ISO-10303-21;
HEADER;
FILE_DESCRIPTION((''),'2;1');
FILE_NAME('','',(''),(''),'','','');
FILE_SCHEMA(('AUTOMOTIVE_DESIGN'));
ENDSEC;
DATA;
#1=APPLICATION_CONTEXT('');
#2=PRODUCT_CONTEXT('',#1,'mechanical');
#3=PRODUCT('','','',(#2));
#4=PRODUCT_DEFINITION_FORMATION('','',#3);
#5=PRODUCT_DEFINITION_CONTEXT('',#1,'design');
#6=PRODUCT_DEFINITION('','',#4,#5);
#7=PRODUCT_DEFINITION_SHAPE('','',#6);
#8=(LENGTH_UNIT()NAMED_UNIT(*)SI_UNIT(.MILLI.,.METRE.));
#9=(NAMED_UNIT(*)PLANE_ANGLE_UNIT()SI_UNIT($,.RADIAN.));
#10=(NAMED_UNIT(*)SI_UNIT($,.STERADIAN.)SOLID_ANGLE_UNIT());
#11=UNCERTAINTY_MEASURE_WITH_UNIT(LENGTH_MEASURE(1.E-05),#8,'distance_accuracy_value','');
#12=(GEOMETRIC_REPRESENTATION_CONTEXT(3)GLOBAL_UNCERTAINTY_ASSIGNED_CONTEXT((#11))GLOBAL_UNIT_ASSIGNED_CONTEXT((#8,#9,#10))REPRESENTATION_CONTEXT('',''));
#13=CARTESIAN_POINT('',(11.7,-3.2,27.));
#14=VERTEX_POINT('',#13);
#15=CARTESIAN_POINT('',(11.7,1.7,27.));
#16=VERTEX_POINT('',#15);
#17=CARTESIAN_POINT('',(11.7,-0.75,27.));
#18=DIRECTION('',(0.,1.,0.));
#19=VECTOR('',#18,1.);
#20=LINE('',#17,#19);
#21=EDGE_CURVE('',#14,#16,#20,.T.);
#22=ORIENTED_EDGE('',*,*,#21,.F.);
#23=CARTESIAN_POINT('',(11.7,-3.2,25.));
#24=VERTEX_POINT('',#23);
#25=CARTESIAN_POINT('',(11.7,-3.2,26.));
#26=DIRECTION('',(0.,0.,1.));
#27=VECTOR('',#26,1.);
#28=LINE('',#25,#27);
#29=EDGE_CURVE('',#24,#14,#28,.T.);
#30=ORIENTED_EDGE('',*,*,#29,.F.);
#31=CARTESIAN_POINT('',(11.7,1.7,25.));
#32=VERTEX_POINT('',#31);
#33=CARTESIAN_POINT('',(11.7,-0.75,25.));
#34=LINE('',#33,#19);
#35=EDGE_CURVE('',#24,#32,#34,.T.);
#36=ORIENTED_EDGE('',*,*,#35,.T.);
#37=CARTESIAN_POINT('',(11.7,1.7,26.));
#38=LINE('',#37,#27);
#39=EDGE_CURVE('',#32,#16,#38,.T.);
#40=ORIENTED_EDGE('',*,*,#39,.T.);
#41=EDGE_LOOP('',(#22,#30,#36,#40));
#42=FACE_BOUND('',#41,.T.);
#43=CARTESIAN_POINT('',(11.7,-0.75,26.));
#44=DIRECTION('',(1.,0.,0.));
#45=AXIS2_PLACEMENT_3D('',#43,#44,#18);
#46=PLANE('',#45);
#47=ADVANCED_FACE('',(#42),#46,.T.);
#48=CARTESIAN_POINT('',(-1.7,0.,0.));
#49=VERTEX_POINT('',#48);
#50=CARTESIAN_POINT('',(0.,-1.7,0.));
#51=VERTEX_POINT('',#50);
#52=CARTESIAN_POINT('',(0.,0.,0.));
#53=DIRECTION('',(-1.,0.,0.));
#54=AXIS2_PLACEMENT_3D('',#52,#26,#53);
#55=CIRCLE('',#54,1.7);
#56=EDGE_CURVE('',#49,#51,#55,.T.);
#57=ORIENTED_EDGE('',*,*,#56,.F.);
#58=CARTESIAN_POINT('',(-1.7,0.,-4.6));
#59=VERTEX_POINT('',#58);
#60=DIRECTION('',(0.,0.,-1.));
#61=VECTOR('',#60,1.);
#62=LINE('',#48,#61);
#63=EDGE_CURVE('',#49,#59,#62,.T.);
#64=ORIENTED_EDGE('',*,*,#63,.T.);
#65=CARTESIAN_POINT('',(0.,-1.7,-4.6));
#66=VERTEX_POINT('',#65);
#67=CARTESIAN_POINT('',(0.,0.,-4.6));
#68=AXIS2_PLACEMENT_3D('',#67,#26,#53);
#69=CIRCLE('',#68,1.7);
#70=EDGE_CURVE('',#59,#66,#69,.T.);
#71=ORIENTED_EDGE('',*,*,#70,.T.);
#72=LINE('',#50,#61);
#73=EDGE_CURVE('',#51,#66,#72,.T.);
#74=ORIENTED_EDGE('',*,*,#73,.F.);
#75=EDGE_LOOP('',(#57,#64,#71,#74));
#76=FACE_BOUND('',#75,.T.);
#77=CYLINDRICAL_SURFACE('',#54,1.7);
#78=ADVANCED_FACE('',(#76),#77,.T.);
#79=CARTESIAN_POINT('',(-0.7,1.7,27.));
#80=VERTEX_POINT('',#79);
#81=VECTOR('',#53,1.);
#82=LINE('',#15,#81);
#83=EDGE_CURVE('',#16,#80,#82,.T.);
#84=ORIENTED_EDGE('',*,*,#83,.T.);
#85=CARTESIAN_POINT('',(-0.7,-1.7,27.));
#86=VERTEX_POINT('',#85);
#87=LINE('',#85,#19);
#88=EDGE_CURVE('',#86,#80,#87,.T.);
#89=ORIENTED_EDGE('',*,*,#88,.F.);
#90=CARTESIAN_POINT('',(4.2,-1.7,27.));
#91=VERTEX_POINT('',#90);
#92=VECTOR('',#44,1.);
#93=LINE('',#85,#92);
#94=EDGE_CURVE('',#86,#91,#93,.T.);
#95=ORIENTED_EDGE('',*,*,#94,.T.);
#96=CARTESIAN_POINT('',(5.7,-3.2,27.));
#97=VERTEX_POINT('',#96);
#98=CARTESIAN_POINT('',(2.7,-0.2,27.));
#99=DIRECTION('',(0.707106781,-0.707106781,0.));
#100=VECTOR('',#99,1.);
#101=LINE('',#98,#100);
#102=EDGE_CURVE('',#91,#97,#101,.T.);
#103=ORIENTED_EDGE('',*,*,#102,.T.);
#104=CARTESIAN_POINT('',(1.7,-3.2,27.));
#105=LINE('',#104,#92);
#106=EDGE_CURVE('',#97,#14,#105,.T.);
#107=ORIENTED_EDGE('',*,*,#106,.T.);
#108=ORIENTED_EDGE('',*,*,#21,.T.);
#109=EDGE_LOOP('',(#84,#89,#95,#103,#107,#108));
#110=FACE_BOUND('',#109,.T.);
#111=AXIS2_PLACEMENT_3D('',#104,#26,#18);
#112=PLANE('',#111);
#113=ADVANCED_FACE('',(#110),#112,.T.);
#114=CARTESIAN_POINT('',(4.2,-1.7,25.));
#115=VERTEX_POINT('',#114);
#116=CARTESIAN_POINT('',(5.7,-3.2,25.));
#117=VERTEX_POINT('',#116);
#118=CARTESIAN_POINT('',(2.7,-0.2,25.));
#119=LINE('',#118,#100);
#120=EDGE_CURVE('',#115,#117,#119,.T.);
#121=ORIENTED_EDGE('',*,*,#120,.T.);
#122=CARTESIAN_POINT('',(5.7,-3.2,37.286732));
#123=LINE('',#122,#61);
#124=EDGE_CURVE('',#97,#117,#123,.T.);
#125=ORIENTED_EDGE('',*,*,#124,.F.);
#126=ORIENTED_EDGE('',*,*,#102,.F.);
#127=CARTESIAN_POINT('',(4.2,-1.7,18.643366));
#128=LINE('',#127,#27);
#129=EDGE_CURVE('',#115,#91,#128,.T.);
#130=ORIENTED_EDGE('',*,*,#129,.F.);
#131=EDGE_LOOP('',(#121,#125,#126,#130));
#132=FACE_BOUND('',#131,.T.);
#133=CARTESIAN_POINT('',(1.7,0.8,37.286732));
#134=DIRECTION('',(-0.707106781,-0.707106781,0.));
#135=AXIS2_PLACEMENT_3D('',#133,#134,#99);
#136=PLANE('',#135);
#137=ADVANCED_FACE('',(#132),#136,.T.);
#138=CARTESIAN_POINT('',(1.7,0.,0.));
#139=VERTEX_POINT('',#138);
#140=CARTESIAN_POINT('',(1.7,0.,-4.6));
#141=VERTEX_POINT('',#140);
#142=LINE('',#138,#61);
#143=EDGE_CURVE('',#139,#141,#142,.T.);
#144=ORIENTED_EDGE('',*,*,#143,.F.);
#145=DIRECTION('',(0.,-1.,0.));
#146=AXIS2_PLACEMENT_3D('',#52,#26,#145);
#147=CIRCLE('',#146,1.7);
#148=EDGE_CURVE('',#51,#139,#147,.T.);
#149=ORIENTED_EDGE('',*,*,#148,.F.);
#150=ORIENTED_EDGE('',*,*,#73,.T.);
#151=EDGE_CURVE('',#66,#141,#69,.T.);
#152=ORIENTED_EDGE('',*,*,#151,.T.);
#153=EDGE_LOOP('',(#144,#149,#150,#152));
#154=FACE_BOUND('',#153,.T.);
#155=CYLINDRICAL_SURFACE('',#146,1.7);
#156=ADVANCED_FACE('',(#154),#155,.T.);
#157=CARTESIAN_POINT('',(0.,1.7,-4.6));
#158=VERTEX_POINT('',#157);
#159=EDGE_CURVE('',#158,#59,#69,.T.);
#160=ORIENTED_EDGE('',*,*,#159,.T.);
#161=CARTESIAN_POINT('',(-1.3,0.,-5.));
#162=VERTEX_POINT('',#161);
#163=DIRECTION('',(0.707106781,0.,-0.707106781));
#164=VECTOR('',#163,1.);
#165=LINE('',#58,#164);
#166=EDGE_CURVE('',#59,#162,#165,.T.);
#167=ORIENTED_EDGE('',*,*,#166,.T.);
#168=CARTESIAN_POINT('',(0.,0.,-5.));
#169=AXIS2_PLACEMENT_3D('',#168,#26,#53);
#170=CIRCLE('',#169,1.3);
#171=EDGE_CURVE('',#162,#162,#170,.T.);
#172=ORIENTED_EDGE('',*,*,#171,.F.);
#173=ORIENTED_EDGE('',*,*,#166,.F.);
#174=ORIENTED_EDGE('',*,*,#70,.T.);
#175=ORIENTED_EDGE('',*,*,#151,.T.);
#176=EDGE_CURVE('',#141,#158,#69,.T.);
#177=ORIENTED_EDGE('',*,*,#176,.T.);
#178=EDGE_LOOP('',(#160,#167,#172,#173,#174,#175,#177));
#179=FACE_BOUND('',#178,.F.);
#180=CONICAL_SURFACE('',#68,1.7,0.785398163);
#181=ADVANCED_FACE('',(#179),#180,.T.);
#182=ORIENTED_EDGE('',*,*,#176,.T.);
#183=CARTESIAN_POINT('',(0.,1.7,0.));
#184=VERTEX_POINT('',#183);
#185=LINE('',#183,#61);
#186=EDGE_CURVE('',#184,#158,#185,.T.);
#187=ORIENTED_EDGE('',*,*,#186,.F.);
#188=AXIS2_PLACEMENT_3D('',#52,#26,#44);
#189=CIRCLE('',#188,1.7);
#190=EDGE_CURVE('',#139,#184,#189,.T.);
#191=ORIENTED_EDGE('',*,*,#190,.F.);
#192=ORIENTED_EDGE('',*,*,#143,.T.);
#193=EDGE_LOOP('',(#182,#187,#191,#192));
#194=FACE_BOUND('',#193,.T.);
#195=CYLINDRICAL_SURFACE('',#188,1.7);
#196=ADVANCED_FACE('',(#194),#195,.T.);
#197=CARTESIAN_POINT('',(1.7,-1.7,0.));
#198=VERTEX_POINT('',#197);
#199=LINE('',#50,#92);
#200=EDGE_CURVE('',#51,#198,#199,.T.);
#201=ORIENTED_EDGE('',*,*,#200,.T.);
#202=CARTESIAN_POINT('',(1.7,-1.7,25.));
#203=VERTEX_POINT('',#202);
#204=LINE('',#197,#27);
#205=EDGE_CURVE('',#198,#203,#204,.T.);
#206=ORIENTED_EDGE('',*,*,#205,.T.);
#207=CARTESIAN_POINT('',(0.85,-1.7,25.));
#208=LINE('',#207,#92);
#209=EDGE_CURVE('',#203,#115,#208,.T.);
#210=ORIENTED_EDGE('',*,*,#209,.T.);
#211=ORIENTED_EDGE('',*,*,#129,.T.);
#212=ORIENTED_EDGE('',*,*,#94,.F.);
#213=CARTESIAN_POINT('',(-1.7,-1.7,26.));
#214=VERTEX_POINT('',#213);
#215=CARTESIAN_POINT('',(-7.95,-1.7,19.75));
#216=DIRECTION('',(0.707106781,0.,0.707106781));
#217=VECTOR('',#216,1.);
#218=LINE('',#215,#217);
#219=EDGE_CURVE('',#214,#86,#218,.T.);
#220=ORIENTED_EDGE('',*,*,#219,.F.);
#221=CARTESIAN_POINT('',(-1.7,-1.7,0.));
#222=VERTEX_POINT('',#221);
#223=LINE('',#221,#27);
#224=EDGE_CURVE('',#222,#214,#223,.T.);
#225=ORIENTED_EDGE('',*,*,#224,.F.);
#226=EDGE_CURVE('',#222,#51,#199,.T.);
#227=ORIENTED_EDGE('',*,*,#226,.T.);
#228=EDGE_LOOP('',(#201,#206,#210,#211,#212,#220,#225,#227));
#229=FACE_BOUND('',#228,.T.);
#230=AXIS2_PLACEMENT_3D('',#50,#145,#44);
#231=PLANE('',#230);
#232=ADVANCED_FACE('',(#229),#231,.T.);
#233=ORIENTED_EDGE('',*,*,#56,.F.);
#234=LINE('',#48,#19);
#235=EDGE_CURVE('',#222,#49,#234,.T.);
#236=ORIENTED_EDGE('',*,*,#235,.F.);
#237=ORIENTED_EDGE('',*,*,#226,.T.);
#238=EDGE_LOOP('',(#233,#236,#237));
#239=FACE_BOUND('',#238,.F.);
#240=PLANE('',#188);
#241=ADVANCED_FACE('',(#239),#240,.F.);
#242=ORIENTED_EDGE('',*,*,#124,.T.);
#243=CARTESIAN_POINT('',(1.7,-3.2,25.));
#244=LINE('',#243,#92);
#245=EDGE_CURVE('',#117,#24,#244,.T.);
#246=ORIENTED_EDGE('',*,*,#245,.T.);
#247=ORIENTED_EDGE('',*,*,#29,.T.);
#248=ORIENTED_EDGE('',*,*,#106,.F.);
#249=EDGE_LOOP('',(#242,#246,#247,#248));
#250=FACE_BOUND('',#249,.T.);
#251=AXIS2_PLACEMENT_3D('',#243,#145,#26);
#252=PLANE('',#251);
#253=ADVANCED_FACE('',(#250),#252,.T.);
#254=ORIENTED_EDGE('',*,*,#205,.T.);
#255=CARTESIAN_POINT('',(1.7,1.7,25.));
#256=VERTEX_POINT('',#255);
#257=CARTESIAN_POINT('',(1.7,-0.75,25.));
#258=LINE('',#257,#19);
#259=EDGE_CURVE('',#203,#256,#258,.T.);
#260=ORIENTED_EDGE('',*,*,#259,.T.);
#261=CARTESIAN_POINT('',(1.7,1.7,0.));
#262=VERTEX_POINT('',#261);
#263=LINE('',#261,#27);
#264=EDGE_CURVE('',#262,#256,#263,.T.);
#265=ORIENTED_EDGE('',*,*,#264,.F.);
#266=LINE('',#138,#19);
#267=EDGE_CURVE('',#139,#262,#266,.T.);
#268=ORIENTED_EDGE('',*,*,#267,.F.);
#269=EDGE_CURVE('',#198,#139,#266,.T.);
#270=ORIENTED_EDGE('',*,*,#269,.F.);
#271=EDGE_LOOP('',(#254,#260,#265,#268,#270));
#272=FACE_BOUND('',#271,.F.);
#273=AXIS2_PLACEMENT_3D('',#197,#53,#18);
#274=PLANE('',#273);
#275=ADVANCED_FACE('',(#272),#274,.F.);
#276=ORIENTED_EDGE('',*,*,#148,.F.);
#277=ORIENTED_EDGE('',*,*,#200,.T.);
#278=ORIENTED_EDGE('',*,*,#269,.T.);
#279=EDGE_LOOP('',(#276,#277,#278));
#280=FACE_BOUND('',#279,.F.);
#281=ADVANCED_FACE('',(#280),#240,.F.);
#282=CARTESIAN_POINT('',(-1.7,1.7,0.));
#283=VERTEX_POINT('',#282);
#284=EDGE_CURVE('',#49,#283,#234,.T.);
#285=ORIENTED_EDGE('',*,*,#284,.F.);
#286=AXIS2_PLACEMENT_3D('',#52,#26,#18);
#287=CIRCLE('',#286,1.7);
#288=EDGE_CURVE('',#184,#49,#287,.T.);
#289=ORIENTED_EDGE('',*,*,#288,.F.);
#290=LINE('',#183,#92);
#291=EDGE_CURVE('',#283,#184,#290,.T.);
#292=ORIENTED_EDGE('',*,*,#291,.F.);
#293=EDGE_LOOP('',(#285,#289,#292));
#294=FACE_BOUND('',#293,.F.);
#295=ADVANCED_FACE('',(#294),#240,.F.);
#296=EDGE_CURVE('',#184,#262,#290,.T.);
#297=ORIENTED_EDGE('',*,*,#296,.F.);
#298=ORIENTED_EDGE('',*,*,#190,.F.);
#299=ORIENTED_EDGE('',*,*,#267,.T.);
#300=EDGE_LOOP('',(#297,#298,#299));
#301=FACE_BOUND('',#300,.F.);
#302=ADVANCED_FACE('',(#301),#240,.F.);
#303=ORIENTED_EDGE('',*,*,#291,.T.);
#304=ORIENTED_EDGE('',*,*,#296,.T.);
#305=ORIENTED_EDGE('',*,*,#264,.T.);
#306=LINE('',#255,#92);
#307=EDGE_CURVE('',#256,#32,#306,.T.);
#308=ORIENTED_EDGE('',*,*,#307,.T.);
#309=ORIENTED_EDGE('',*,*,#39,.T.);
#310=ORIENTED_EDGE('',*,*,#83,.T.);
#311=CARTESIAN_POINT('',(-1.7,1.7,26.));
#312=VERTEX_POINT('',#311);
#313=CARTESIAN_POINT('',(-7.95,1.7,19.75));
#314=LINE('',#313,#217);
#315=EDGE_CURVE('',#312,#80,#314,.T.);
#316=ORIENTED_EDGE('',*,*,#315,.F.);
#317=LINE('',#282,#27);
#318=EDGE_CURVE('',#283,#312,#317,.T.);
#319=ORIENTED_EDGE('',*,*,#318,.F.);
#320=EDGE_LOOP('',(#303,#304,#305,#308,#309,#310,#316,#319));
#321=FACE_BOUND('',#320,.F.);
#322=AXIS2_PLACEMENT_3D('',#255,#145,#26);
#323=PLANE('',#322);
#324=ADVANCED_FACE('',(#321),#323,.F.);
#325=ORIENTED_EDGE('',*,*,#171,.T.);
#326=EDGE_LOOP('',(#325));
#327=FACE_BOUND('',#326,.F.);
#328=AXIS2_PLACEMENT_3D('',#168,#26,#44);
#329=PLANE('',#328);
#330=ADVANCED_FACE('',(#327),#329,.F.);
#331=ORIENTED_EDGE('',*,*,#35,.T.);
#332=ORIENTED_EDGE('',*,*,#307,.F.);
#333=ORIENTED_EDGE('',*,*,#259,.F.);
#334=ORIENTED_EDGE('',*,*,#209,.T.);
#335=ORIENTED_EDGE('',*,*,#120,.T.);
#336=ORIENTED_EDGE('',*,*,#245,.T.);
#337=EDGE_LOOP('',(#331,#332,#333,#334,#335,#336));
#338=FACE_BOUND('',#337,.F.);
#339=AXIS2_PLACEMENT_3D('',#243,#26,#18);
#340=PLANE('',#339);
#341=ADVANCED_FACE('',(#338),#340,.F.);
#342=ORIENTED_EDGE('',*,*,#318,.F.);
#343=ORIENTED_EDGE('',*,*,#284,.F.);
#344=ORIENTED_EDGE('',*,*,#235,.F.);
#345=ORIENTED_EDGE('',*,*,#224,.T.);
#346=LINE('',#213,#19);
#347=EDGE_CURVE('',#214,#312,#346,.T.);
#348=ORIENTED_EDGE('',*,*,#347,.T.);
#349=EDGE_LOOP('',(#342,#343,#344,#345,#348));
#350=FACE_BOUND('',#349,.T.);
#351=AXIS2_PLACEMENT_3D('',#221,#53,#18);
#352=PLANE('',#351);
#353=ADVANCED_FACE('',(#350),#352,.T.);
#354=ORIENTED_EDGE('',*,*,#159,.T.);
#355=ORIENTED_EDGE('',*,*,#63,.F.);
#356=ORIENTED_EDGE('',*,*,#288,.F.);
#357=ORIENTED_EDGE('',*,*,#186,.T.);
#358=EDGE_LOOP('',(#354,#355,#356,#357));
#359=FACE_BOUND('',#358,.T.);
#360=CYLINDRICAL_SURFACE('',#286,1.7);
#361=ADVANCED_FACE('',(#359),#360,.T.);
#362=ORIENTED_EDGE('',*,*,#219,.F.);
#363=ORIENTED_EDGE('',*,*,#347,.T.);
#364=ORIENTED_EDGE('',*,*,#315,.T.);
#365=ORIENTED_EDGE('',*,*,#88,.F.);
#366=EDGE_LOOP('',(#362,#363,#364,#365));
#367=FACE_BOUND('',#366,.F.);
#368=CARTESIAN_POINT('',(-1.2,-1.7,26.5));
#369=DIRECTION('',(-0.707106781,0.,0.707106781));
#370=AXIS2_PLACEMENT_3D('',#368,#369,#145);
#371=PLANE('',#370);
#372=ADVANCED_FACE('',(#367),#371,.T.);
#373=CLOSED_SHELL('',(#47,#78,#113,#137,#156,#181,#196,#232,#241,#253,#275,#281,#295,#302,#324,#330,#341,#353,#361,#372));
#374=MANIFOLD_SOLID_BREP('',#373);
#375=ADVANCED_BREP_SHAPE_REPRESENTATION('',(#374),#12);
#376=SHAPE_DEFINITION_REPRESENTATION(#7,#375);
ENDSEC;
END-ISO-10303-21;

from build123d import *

# Parameters (mm, degrees)
F0_W        = 3.4
F0_H        = 3.4
F1_DEPTH    = 27
F2_SIZE     = 1
F3_W        = 4.9
F3_H        = 2
F4_DEPTH    = 10
F5_T4_DEPTH = 22.5734639037
F7_DEPTH    = 5


# Not quite as in the source:
# - a fillet or chamfer that OpenCascade refuses, or shapes differently, is made with other operations: its cross-section is extruded or revolved along the edge and cut away or added


with BuildPart() as f1:
    # F0 (on Top) → F1 (new body)
    with BuildSketch(Plane.XY):
        Rectangle(F0_W, F0_H)
    extrude(amount=F1_DEPTH)

    # F2
    f2_edges = [f1.edges().sort_by_distance(p)[0] for p in [
        (-1.7, 0, 27),
    ]]
    chamfer(f2_edges, length=F2_SIZE)

    # F3 (on face) → F4 (join)
    with BuildSketch(Plane.YZ.offset(1.7)):
        with Locations((-0.75, 26)):
            Rectangle(F3_W, F3_H)
    extrude(amount=F4_DEPTH)

    # F5: chamfer of 4 on 1 edges, made by hand


with BuildPart() as f5_tool2:
    # F5_s3 → F5_t4 (new body)
    with BuildSketch(Plane.XY.offset(37.2867319519)):
        Polygon((1.7, 0.8), (5.7, -3.2), (1.7, -3.2), align=None)
    extrude(amount=-F5_T4_DEPTH)

    split(bisect_by=Plane.XZ.offset(1.7), keep=Keep.TOP)


with BuildPart() as f1_1:
    add(f1.part)

    # F5_t1: cut F5_tool2
    add(f5_tool2.part, mode=Mode.SUBTRACT)

    # F6 (on face) → F7 (join)
    with BuildSketch(Plane.XY):
        with BuildLine():
            ThreePointArc((0, -1.7), (1.202081528, -1.202081528), (1.7, 0))
            ThreePointArc((1.7, 0), (1.202081528, 1.202081528), (0, 1.7))
            ThreePointArc((0, 1.7), (-1.202081528, 1.202081528), (-1.7, 0))
            ThreePointArc((-1.7, 0), (-1.202081528, -1.202081528), (0, -1.7))
        make_face()
    extrude(amount=-F7_DEPTH)

    # F8: chamfer of 0.4 on 1 edges, made by hand

    # F8_s1 → F8_t2 (revolve, cut)
    with BuildSketch(Plane.XZ):
        Polygon((-1.7, -4.6), (-1.3, -5), (-1.7, -5), align=None)
    revolve(axis=Axis((0, 0, -5), (0, 0, 1)), mode=Mode.SUBTRACT)


solid = f1_1.part
